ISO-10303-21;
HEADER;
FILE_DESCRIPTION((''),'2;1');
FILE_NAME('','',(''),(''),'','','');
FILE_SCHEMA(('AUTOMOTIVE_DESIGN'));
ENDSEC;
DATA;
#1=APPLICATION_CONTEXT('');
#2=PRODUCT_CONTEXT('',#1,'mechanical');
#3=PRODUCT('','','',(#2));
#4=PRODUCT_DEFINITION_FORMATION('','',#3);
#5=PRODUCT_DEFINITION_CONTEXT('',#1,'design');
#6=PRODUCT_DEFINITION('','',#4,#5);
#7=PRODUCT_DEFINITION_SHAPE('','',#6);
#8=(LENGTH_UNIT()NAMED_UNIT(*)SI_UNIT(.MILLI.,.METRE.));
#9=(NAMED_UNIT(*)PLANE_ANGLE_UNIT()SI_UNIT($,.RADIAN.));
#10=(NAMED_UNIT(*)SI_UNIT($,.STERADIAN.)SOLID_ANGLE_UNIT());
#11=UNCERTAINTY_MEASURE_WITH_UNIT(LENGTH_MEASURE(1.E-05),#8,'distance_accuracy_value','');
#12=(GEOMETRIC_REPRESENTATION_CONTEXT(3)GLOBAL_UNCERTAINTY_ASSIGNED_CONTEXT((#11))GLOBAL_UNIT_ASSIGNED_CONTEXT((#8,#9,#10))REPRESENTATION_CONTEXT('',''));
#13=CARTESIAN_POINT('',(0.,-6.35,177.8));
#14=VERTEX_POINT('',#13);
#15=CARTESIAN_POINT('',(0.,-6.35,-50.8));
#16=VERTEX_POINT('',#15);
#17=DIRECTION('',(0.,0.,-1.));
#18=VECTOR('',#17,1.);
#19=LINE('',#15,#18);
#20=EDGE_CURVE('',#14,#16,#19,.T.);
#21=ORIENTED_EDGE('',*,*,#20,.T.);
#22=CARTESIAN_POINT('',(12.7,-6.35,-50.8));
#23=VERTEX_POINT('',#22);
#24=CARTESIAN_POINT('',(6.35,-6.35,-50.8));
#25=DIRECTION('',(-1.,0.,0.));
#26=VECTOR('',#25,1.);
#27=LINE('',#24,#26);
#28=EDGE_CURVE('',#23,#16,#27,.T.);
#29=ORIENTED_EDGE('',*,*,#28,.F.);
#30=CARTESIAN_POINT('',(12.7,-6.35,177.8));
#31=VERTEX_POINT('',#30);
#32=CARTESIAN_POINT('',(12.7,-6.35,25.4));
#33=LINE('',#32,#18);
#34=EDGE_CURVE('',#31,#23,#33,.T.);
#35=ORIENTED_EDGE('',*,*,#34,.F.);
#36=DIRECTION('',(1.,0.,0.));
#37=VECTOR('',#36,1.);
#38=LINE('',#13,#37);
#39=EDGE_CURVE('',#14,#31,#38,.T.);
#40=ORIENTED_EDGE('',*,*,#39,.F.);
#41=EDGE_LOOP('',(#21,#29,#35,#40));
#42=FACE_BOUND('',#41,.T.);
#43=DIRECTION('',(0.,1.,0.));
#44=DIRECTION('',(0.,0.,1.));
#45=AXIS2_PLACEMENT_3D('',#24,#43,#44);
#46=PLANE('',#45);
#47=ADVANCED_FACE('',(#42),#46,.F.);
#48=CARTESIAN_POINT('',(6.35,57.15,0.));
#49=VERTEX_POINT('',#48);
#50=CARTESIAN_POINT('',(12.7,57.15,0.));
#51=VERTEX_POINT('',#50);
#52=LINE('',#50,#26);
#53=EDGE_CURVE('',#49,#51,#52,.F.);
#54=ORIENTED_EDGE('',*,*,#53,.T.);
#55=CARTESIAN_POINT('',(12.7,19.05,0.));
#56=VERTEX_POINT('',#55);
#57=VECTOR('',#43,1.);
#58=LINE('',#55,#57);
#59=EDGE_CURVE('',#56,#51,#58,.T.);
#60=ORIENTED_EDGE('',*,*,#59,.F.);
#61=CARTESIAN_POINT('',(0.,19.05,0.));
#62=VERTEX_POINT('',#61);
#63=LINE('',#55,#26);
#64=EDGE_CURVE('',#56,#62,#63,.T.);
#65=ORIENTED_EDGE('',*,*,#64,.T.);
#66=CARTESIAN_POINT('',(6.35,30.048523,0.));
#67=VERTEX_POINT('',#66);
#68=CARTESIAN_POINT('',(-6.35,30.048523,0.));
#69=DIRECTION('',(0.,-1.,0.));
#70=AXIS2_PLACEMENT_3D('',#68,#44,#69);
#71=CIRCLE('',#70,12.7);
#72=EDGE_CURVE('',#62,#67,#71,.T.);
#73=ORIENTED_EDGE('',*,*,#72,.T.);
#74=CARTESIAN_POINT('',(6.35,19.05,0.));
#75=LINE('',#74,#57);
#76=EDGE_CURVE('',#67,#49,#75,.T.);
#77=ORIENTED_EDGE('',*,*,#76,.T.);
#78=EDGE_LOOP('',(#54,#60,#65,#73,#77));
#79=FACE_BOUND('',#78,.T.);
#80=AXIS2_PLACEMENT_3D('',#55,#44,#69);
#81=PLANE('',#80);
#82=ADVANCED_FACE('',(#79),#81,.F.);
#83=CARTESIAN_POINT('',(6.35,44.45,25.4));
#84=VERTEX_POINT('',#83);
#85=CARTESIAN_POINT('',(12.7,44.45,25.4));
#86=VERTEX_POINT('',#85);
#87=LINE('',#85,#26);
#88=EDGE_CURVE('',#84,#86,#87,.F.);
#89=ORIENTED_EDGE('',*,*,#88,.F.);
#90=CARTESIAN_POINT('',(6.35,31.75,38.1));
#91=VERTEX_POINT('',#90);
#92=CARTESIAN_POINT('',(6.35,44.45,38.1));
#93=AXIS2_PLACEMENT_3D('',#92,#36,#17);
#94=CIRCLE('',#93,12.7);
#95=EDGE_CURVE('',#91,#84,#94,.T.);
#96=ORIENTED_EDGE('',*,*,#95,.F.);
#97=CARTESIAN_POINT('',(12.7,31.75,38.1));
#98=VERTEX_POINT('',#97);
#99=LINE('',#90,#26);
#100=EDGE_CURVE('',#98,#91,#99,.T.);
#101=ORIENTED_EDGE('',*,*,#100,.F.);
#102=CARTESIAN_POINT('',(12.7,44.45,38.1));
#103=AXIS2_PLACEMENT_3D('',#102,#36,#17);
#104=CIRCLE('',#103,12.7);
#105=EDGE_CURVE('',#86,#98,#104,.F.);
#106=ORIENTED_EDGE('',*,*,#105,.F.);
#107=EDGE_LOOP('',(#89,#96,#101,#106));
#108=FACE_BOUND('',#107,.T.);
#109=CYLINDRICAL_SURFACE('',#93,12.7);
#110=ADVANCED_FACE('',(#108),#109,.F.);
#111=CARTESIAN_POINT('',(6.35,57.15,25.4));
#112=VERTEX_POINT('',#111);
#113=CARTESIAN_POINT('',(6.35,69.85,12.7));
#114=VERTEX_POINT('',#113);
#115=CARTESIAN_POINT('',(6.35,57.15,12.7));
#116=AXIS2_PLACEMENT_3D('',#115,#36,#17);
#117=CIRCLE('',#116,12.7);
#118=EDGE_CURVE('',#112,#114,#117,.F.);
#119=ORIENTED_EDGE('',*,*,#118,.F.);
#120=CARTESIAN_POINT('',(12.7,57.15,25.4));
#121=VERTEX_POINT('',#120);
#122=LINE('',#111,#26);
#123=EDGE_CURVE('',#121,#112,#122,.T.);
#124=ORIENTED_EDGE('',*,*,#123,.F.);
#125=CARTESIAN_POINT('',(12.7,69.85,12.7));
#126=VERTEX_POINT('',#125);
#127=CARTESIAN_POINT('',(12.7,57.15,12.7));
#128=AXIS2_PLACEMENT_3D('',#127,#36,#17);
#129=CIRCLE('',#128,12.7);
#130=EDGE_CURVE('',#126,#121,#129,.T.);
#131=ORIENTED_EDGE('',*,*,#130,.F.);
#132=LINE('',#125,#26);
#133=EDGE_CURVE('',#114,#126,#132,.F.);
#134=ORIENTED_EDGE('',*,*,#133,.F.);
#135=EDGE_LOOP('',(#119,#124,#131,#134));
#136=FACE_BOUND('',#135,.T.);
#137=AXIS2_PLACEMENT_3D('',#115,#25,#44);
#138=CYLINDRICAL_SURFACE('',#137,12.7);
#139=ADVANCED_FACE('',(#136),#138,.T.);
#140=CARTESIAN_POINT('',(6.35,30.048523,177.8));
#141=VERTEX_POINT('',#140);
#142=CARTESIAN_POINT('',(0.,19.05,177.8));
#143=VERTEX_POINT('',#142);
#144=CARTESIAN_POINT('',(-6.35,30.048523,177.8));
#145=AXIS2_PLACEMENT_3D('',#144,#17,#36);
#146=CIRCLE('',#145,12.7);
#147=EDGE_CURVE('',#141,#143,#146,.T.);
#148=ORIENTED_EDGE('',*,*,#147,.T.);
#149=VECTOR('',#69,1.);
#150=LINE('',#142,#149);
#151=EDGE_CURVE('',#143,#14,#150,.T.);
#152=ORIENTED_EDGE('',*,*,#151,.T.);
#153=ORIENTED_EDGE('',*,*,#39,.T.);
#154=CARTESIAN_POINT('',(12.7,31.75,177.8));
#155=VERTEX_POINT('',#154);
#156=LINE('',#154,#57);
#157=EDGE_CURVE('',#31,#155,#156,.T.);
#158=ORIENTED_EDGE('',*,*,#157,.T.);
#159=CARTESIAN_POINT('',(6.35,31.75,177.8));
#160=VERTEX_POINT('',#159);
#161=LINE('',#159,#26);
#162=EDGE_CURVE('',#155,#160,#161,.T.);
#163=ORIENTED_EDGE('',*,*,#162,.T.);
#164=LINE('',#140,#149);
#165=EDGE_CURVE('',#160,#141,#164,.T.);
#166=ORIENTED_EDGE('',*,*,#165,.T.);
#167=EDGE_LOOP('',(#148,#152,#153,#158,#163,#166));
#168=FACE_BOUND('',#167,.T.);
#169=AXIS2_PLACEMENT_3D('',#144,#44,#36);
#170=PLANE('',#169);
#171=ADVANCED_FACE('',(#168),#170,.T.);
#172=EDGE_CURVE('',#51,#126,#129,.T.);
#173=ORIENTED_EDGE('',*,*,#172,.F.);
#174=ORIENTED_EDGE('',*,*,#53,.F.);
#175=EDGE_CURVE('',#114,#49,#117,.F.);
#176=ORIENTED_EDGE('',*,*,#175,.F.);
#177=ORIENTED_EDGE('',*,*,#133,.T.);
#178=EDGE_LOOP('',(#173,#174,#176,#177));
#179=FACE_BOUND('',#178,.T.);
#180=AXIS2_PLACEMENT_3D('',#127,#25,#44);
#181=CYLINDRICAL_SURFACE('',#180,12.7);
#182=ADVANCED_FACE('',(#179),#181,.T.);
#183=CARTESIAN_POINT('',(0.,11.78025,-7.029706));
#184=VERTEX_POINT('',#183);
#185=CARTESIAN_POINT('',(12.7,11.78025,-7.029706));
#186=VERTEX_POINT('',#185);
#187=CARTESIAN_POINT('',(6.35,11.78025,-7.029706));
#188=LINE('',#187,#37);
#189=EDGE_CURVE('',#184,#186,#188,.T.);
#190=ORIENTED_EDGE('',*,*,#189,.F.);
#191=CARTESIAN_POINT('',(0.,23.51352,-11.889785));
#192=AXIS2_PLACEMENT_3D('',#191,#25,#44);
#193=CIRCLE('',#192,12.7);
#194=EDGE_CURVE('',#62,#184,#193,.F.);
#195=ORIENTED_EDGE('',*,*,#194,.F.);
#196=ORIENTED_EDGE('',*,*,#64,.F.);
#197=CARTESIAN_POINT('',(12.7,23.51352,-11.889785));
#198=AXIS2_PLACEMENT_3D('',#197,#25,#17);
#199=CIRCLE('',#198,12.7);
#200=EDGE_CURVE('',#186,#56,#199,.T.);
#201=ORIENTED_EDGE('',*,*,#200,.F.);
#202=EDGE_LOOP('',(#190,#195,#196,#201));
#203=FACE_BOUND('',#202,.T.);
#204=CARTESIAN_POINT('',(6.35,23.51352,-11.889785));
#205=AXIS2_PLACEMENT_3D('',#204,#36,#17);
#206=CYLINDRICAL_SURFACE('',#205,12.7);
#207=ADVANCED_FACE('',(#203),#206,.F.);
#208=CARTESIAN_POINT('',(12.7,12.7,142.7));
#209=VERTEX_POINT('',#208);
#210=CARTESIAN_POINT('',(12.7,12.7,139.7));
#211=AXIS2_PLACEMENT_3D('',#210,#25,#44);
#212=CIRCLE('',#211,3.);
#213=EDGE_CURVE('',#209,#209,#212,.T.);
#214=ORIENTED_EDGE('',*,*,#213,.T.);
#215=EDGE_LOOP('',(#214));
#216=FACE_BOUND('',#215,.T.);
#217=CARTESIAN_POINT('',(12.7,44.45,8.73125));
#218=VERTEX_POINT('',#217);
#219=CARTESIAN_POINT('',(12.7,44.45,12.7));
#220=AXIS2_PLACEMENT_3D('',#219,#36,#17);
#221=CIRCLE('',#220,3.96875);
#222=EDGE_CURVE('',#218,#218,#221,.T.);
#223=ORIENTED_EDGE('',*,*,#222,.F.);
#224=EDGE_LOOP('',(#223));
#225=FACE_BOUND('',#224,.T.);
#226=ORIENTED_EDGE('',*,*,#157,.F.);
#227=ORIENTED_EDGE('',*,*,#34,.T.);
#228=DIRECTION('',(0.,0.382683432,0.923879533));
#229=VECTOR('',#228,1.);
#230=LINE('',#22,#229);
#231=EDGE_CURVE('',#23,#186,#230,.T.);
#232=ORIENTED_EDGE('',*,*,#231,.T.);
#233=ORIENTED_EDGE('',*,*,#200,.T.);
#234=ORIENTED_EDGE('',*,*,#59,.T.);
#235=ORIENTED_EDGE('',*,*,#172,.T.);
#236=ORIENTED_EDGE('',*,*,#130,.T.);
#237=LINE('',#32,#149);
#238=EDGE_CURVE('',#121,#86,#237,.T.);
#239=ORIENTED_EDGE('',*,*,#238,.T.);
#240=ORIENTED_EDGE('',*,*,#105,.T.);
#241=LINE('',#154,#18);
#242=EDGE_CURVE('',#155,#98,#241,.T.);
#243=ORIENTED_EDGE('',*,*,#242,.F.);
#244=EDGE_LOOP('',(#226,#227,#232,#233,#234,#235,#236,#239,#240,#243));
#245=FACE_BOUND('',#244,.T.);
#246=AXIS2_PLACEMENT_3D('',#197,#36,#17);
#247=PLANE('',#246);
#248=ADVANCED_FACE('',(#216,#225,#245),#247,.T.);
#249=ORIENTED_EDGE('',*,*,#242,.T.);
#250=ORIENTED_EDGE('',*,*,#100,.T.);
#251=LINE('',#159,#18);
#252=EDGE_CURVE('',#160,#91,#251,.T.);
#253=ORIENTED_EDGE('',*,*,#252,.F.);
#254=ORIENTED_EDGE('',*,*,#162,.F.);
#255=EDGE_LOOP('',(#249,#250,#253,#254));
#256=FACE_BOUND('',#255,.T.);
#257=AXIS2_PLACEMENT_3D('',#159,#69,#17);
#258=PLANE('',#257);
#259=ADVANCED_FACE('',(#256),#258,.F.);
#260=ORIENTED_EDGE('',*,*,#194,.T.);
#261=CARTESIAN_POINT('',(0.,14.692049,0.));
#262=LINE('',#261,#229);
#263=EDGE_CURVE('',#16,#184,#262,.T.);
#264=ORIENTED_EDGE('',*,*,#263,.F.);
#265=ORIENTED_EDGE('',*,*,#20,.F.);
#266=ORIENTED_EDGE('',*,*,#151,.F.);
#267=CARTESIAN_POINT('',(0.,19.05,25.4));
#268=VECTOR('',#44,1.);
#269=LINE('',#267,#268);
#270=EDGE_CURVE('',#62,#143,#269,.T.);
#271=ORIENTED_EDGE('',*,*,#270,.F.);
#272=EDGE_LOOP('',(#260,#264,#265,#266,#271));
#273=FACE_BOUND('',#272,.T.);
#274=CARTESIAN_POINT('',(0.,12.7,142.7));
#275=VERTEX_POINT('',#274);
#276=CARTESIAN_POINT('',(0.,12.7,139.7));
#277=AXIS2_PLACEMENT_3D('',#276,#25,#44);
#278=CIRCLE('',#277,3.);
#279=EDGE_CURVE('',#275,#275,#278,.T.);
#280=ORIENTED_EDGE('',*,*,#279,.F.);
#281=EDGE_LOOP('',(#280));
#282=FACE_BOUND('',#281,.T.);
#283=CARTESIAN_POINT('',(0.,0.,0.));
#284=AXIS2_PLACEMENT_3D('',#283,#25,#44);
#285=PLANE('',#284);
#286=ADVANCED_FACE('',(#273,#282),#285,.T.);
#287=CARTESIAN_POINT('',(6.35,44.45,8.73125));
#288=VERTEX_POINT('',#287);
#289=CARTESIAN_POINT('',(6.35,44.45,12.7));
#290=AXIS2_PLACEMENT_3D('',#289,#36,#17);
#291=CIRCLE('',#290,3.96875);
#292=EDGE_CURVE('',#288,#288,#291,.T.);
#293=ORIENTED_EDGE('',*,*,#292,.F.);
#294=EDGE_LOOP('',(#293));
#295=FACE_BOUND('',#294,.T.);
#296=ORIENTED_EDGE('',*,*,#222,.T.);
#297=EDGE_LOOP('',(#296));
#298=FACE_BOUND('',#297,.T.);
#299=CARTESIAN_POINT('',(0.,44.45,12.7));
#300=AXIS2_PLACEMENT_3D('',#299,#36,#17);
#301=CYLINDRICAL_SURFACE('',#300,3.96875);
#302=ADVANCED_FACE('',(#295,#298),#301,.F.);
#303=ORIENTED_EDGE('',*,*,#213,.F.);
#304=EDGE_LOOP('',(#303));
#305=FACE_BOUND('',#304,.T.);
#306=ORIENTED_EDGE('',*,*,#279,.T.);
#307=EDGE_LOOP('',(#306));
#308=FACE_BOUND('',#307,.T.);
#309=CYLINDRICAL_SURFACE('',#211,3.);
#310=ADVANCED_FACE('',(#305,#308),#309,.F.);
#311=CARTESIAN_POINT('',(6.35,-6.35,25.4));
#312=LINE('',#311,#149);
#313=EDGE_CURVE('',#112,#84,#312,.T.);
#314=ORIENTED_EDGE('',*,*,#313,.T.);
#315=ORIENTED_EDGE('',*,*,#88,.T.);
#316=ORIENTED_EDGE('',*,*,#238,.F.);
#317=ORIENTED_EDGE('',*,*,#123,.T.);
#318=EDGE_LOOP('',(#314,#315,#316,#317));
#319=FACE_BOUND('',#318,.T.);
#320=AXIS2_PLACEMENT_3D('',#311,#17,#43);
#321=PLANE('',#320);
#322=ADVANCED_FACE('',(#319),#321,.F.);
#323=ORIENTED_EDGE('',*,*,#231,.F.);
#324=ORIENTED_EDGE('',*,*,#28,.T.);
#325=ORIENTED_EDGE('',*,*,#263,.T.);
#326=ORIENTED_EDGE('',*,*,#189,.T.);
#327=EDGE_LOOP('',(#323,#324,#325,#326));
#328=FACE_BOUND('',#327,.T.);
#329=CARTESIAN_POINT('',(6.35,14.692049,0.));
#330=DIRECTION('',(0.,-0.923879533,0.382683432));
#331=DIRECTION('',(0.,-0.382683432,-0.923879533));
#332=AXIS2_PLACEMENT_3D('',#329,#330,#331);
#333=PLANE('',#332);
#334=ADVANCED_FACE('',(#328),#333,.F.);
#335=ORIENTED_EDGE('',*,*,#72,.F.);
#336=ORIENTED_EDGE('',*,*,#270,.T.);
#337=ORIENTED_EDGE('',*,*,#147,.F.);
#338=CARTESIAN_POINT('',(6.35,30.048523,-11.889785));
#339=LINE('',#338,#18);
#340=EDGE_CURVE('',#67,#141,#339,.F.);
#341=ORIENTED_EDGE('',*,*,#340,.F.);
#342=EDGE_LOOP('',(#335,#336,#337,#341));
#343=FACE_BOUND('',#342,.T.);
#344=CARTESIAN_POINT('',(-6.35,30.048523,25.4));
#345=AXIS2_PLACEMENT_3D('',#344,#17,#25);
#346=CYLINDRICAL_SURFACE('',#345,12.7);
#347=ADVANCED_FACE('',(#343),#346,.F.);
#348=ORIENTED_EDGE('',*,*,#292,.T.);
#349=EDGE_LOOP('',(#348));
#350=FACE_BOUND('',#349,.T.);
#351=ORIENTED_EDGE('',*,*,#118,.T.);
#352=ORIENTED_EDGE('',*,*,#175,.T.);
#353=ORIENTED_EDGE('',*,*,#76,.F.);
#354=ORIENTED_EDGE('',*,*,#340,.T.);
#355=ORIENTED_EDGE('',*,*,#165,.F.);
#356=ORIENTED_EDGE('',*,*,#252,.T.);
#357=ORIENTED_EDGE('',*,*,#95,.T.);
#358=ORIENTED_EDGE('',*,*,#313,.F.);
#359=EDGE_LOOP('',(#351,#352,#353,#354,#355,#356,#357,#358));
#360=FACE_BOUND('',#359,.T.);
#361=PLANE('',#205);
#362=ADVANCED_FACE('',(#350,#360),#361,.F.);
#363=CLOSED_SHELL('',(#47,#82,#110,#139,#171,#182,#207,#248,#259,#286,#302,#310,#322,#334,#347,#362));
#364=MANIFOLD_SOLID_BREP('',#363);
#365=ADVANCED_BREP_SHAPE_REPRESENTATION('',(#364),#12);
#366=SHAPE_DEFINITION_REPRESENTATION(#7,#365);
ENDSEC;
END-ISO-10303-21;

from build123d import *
from build123d.topology import SkipClean

# Parameters (mm, degrees)
BOSS_EXTRUDE1_DEPTH     = 6.35
FILLET1_R               = 12.7
BOSS_EXTRUDE2_DEPTH     = 6.35
FILLET2_R               = 12.7
CUT_EXTRUDE1_DEPTH      = 88.298066989
CUT_EXTRUDE1_DEPTH_BACK = 88.298066989
SKETCH3_R               = 3.96875
FILLET3_R               = 12.7
BOSS_EXTRUDE3_START     = 152.4
BOSS_EXTRUDE3_DEPTH     = 152.4
FILLET4_R               = 12.7
CUT_EXTRUDE2_DEPTH      = 192.450130582
CUT_EXTRUDE2_DEPTH_BACK = 192.450130582
SKETCH5_R               = 3


# Some blends are built 0.0001 mm under size
with BuildPart() as part:
    # Sketch1 → Boss-Extrude1 (new body)
    with BuildSketch(Plane(origin=(0, 0, 0), x_dir=(0, 0, -1), z_dir=(1, 0, 0))):
        Polygon((0, 14.692048969), (50.8, -6.35), (-25.4, -6.35), (-25.4, 6.35), (-25.4, 19.05), (0, 19.05), align=None)
    extrude(amount=BOSS_EXTRUDE1_DEPTH)

    # Fillet1
    # the kernel refuses this fillet: 12.7 mm, written as the material it adds along each edge
    with BuildSketch(Plane(origin=(0, 14.692048969, 0), x_dir=(0, -0.38268343236508373, -0.9238795325112893), z_dir=(1, 0, 0))) as fillet1_piece_1:
        with BuildLine():
            CenterArc((7.608898544, 12.7), FILLET1_R, 223.076533416, 46.923466584)
            Line((-1.667715659, 4.026221762), (-1.853247943, 3.852746197))
            ThreePointArc((-1.853247943, 3.852746197), (-1.068523231, 1.915909289), (-0.234665401, -0.097201592))
            Line((-0.234665401, -0.097201592), (0, -0.254))
            Line((0, -0.254), (7.608898544, -0.254))
            Line((7.608898544, -0.254), (7.608898544, 0))
        make_face()
    extrude(amount=6.35)

    # Sketch2 → Boss-Extrude2 (add)
    with SkipClean():  # the faces are left unmerged after this step: merging them gives an invalid solid
        with BuildSketch(Plane(origin=(6.35, 0, 0), x_dir=(0, 0, -1), z_dir=(1, 0, 0))):
            with BuildLine():
                Line((0, 19.05), (0, 69.85))
                Line((0, 69.85), (-25.4, 69.85))
                Line((-25.4, 69.85), (-25.4, -6.35))
                Line((-25.4, -6.35), (50.8, -6.35))
                Line((50.8, -6.35), (7.02970563, 11.780249557))
                ThreePointArc((7.02970563, 11.780249557), (2.760063939, 14.685258788), (0, 19.05))
            make_face()
        extrude(amount=BOSS_EXTRUDE2_DEPTH)

    # Fillet2
    # the kernel refuses this fillet: 12.7 mm, written as the material it adds along each edge
    with BuildSketch(Plane(origin=(6.35, 19.05, 25.4), x_dir=(-1, 0, 0), z_dir=(0, 0, -1))) as fillet2_piece_1:
        with BuildLine():
            CenterArc((12.7, 10.998522628), FILLET2_R, 180, 60)
            Line((0, 10.998522628), (0, 0))
            Line((0, 0), (6.35, 0))
        make_face()
    extrude(amount=25.4)

    # Sketch3 → Cut-Extrude1 (cut, two sides: drawn at the far end of the back side and taken through both)
    with BuildSketch(Plane(origin=(12.7, 0, 0), x_dir=(0, 0, -1), z_dir=(1, 0, 0)).offset(-CUT_EXTRUDE1_DEPTH_BACK)):
        with Locations((-12.7, 44.45)):
            Circle(SKETCH3_R)
    extrude(amount=CUT_EXTRUDE1_DEPTH + CUT_EXTRUDE1_DEPTH_BACK, mode=Mode.SUBTRACT)

    # Fillet3
    fillet3_edges = [part.edges().sort_by_distance(p)[0] for p in [
        (9.525, 69.85, 0),
        (9.525, 69.85, 25.4),
    ]]
    fillet(fillet3_edges, radius=FILLET3_R - 0.0001)  # a hair under: the kernel refuses the full size

    # Sketch4 → Boss-Extrude3 (add)
    with BuildSketch(Plane.XY.offset(25.4).offset(BOSS_EXTRUDE3_START)):
        with BuildLine():
            Line((6.35, 30.048522628), (6.35, 31.75))
            Line((6.35, 31.75), (12.7, 31.75))
            Line((12.7, 31.75), (12.7, -6.35))
            Line((12.7, -6.35), (0, -6.35))
            Line((0, -6.35), (0, 19.05))
            ThreePointArc((0, 19.05), (4.648522628, 23.698522628), (6.35, 30.048522628))
        make_face()
    extrude(amount=-BOSS_EXTRUDE3_DEPTH)

    # Fillet4
    fillet4_edges = [part.edges().sort_by_distance(p)[0] for p in [
        (9.525, 31.75, 25.4),
    ]]
    fillet(fillet4_edges, radius=FILLET4_R)

    # Sketch5 → Cut-Extrude2 (cut, two sides: drawn at the far end of the back side and taken through both)
    with SkipClean():  # the faces are left unmerged after this step: merging them gives an invalid solid
        with BuildSketch(Plane.ZY.offset(-CUT_EXTRUDE2_DEPTH_BACK)):
            with Locations((139.7, 12.7)):
                Circle(SKETCH5_R)
        extrude(amount=CUT_EXTRUDE2_DEPTH + CUT_EXTRUDE2_DEPTH_BACK, mode=Mode.SUBTRACT)


solid = part.part
